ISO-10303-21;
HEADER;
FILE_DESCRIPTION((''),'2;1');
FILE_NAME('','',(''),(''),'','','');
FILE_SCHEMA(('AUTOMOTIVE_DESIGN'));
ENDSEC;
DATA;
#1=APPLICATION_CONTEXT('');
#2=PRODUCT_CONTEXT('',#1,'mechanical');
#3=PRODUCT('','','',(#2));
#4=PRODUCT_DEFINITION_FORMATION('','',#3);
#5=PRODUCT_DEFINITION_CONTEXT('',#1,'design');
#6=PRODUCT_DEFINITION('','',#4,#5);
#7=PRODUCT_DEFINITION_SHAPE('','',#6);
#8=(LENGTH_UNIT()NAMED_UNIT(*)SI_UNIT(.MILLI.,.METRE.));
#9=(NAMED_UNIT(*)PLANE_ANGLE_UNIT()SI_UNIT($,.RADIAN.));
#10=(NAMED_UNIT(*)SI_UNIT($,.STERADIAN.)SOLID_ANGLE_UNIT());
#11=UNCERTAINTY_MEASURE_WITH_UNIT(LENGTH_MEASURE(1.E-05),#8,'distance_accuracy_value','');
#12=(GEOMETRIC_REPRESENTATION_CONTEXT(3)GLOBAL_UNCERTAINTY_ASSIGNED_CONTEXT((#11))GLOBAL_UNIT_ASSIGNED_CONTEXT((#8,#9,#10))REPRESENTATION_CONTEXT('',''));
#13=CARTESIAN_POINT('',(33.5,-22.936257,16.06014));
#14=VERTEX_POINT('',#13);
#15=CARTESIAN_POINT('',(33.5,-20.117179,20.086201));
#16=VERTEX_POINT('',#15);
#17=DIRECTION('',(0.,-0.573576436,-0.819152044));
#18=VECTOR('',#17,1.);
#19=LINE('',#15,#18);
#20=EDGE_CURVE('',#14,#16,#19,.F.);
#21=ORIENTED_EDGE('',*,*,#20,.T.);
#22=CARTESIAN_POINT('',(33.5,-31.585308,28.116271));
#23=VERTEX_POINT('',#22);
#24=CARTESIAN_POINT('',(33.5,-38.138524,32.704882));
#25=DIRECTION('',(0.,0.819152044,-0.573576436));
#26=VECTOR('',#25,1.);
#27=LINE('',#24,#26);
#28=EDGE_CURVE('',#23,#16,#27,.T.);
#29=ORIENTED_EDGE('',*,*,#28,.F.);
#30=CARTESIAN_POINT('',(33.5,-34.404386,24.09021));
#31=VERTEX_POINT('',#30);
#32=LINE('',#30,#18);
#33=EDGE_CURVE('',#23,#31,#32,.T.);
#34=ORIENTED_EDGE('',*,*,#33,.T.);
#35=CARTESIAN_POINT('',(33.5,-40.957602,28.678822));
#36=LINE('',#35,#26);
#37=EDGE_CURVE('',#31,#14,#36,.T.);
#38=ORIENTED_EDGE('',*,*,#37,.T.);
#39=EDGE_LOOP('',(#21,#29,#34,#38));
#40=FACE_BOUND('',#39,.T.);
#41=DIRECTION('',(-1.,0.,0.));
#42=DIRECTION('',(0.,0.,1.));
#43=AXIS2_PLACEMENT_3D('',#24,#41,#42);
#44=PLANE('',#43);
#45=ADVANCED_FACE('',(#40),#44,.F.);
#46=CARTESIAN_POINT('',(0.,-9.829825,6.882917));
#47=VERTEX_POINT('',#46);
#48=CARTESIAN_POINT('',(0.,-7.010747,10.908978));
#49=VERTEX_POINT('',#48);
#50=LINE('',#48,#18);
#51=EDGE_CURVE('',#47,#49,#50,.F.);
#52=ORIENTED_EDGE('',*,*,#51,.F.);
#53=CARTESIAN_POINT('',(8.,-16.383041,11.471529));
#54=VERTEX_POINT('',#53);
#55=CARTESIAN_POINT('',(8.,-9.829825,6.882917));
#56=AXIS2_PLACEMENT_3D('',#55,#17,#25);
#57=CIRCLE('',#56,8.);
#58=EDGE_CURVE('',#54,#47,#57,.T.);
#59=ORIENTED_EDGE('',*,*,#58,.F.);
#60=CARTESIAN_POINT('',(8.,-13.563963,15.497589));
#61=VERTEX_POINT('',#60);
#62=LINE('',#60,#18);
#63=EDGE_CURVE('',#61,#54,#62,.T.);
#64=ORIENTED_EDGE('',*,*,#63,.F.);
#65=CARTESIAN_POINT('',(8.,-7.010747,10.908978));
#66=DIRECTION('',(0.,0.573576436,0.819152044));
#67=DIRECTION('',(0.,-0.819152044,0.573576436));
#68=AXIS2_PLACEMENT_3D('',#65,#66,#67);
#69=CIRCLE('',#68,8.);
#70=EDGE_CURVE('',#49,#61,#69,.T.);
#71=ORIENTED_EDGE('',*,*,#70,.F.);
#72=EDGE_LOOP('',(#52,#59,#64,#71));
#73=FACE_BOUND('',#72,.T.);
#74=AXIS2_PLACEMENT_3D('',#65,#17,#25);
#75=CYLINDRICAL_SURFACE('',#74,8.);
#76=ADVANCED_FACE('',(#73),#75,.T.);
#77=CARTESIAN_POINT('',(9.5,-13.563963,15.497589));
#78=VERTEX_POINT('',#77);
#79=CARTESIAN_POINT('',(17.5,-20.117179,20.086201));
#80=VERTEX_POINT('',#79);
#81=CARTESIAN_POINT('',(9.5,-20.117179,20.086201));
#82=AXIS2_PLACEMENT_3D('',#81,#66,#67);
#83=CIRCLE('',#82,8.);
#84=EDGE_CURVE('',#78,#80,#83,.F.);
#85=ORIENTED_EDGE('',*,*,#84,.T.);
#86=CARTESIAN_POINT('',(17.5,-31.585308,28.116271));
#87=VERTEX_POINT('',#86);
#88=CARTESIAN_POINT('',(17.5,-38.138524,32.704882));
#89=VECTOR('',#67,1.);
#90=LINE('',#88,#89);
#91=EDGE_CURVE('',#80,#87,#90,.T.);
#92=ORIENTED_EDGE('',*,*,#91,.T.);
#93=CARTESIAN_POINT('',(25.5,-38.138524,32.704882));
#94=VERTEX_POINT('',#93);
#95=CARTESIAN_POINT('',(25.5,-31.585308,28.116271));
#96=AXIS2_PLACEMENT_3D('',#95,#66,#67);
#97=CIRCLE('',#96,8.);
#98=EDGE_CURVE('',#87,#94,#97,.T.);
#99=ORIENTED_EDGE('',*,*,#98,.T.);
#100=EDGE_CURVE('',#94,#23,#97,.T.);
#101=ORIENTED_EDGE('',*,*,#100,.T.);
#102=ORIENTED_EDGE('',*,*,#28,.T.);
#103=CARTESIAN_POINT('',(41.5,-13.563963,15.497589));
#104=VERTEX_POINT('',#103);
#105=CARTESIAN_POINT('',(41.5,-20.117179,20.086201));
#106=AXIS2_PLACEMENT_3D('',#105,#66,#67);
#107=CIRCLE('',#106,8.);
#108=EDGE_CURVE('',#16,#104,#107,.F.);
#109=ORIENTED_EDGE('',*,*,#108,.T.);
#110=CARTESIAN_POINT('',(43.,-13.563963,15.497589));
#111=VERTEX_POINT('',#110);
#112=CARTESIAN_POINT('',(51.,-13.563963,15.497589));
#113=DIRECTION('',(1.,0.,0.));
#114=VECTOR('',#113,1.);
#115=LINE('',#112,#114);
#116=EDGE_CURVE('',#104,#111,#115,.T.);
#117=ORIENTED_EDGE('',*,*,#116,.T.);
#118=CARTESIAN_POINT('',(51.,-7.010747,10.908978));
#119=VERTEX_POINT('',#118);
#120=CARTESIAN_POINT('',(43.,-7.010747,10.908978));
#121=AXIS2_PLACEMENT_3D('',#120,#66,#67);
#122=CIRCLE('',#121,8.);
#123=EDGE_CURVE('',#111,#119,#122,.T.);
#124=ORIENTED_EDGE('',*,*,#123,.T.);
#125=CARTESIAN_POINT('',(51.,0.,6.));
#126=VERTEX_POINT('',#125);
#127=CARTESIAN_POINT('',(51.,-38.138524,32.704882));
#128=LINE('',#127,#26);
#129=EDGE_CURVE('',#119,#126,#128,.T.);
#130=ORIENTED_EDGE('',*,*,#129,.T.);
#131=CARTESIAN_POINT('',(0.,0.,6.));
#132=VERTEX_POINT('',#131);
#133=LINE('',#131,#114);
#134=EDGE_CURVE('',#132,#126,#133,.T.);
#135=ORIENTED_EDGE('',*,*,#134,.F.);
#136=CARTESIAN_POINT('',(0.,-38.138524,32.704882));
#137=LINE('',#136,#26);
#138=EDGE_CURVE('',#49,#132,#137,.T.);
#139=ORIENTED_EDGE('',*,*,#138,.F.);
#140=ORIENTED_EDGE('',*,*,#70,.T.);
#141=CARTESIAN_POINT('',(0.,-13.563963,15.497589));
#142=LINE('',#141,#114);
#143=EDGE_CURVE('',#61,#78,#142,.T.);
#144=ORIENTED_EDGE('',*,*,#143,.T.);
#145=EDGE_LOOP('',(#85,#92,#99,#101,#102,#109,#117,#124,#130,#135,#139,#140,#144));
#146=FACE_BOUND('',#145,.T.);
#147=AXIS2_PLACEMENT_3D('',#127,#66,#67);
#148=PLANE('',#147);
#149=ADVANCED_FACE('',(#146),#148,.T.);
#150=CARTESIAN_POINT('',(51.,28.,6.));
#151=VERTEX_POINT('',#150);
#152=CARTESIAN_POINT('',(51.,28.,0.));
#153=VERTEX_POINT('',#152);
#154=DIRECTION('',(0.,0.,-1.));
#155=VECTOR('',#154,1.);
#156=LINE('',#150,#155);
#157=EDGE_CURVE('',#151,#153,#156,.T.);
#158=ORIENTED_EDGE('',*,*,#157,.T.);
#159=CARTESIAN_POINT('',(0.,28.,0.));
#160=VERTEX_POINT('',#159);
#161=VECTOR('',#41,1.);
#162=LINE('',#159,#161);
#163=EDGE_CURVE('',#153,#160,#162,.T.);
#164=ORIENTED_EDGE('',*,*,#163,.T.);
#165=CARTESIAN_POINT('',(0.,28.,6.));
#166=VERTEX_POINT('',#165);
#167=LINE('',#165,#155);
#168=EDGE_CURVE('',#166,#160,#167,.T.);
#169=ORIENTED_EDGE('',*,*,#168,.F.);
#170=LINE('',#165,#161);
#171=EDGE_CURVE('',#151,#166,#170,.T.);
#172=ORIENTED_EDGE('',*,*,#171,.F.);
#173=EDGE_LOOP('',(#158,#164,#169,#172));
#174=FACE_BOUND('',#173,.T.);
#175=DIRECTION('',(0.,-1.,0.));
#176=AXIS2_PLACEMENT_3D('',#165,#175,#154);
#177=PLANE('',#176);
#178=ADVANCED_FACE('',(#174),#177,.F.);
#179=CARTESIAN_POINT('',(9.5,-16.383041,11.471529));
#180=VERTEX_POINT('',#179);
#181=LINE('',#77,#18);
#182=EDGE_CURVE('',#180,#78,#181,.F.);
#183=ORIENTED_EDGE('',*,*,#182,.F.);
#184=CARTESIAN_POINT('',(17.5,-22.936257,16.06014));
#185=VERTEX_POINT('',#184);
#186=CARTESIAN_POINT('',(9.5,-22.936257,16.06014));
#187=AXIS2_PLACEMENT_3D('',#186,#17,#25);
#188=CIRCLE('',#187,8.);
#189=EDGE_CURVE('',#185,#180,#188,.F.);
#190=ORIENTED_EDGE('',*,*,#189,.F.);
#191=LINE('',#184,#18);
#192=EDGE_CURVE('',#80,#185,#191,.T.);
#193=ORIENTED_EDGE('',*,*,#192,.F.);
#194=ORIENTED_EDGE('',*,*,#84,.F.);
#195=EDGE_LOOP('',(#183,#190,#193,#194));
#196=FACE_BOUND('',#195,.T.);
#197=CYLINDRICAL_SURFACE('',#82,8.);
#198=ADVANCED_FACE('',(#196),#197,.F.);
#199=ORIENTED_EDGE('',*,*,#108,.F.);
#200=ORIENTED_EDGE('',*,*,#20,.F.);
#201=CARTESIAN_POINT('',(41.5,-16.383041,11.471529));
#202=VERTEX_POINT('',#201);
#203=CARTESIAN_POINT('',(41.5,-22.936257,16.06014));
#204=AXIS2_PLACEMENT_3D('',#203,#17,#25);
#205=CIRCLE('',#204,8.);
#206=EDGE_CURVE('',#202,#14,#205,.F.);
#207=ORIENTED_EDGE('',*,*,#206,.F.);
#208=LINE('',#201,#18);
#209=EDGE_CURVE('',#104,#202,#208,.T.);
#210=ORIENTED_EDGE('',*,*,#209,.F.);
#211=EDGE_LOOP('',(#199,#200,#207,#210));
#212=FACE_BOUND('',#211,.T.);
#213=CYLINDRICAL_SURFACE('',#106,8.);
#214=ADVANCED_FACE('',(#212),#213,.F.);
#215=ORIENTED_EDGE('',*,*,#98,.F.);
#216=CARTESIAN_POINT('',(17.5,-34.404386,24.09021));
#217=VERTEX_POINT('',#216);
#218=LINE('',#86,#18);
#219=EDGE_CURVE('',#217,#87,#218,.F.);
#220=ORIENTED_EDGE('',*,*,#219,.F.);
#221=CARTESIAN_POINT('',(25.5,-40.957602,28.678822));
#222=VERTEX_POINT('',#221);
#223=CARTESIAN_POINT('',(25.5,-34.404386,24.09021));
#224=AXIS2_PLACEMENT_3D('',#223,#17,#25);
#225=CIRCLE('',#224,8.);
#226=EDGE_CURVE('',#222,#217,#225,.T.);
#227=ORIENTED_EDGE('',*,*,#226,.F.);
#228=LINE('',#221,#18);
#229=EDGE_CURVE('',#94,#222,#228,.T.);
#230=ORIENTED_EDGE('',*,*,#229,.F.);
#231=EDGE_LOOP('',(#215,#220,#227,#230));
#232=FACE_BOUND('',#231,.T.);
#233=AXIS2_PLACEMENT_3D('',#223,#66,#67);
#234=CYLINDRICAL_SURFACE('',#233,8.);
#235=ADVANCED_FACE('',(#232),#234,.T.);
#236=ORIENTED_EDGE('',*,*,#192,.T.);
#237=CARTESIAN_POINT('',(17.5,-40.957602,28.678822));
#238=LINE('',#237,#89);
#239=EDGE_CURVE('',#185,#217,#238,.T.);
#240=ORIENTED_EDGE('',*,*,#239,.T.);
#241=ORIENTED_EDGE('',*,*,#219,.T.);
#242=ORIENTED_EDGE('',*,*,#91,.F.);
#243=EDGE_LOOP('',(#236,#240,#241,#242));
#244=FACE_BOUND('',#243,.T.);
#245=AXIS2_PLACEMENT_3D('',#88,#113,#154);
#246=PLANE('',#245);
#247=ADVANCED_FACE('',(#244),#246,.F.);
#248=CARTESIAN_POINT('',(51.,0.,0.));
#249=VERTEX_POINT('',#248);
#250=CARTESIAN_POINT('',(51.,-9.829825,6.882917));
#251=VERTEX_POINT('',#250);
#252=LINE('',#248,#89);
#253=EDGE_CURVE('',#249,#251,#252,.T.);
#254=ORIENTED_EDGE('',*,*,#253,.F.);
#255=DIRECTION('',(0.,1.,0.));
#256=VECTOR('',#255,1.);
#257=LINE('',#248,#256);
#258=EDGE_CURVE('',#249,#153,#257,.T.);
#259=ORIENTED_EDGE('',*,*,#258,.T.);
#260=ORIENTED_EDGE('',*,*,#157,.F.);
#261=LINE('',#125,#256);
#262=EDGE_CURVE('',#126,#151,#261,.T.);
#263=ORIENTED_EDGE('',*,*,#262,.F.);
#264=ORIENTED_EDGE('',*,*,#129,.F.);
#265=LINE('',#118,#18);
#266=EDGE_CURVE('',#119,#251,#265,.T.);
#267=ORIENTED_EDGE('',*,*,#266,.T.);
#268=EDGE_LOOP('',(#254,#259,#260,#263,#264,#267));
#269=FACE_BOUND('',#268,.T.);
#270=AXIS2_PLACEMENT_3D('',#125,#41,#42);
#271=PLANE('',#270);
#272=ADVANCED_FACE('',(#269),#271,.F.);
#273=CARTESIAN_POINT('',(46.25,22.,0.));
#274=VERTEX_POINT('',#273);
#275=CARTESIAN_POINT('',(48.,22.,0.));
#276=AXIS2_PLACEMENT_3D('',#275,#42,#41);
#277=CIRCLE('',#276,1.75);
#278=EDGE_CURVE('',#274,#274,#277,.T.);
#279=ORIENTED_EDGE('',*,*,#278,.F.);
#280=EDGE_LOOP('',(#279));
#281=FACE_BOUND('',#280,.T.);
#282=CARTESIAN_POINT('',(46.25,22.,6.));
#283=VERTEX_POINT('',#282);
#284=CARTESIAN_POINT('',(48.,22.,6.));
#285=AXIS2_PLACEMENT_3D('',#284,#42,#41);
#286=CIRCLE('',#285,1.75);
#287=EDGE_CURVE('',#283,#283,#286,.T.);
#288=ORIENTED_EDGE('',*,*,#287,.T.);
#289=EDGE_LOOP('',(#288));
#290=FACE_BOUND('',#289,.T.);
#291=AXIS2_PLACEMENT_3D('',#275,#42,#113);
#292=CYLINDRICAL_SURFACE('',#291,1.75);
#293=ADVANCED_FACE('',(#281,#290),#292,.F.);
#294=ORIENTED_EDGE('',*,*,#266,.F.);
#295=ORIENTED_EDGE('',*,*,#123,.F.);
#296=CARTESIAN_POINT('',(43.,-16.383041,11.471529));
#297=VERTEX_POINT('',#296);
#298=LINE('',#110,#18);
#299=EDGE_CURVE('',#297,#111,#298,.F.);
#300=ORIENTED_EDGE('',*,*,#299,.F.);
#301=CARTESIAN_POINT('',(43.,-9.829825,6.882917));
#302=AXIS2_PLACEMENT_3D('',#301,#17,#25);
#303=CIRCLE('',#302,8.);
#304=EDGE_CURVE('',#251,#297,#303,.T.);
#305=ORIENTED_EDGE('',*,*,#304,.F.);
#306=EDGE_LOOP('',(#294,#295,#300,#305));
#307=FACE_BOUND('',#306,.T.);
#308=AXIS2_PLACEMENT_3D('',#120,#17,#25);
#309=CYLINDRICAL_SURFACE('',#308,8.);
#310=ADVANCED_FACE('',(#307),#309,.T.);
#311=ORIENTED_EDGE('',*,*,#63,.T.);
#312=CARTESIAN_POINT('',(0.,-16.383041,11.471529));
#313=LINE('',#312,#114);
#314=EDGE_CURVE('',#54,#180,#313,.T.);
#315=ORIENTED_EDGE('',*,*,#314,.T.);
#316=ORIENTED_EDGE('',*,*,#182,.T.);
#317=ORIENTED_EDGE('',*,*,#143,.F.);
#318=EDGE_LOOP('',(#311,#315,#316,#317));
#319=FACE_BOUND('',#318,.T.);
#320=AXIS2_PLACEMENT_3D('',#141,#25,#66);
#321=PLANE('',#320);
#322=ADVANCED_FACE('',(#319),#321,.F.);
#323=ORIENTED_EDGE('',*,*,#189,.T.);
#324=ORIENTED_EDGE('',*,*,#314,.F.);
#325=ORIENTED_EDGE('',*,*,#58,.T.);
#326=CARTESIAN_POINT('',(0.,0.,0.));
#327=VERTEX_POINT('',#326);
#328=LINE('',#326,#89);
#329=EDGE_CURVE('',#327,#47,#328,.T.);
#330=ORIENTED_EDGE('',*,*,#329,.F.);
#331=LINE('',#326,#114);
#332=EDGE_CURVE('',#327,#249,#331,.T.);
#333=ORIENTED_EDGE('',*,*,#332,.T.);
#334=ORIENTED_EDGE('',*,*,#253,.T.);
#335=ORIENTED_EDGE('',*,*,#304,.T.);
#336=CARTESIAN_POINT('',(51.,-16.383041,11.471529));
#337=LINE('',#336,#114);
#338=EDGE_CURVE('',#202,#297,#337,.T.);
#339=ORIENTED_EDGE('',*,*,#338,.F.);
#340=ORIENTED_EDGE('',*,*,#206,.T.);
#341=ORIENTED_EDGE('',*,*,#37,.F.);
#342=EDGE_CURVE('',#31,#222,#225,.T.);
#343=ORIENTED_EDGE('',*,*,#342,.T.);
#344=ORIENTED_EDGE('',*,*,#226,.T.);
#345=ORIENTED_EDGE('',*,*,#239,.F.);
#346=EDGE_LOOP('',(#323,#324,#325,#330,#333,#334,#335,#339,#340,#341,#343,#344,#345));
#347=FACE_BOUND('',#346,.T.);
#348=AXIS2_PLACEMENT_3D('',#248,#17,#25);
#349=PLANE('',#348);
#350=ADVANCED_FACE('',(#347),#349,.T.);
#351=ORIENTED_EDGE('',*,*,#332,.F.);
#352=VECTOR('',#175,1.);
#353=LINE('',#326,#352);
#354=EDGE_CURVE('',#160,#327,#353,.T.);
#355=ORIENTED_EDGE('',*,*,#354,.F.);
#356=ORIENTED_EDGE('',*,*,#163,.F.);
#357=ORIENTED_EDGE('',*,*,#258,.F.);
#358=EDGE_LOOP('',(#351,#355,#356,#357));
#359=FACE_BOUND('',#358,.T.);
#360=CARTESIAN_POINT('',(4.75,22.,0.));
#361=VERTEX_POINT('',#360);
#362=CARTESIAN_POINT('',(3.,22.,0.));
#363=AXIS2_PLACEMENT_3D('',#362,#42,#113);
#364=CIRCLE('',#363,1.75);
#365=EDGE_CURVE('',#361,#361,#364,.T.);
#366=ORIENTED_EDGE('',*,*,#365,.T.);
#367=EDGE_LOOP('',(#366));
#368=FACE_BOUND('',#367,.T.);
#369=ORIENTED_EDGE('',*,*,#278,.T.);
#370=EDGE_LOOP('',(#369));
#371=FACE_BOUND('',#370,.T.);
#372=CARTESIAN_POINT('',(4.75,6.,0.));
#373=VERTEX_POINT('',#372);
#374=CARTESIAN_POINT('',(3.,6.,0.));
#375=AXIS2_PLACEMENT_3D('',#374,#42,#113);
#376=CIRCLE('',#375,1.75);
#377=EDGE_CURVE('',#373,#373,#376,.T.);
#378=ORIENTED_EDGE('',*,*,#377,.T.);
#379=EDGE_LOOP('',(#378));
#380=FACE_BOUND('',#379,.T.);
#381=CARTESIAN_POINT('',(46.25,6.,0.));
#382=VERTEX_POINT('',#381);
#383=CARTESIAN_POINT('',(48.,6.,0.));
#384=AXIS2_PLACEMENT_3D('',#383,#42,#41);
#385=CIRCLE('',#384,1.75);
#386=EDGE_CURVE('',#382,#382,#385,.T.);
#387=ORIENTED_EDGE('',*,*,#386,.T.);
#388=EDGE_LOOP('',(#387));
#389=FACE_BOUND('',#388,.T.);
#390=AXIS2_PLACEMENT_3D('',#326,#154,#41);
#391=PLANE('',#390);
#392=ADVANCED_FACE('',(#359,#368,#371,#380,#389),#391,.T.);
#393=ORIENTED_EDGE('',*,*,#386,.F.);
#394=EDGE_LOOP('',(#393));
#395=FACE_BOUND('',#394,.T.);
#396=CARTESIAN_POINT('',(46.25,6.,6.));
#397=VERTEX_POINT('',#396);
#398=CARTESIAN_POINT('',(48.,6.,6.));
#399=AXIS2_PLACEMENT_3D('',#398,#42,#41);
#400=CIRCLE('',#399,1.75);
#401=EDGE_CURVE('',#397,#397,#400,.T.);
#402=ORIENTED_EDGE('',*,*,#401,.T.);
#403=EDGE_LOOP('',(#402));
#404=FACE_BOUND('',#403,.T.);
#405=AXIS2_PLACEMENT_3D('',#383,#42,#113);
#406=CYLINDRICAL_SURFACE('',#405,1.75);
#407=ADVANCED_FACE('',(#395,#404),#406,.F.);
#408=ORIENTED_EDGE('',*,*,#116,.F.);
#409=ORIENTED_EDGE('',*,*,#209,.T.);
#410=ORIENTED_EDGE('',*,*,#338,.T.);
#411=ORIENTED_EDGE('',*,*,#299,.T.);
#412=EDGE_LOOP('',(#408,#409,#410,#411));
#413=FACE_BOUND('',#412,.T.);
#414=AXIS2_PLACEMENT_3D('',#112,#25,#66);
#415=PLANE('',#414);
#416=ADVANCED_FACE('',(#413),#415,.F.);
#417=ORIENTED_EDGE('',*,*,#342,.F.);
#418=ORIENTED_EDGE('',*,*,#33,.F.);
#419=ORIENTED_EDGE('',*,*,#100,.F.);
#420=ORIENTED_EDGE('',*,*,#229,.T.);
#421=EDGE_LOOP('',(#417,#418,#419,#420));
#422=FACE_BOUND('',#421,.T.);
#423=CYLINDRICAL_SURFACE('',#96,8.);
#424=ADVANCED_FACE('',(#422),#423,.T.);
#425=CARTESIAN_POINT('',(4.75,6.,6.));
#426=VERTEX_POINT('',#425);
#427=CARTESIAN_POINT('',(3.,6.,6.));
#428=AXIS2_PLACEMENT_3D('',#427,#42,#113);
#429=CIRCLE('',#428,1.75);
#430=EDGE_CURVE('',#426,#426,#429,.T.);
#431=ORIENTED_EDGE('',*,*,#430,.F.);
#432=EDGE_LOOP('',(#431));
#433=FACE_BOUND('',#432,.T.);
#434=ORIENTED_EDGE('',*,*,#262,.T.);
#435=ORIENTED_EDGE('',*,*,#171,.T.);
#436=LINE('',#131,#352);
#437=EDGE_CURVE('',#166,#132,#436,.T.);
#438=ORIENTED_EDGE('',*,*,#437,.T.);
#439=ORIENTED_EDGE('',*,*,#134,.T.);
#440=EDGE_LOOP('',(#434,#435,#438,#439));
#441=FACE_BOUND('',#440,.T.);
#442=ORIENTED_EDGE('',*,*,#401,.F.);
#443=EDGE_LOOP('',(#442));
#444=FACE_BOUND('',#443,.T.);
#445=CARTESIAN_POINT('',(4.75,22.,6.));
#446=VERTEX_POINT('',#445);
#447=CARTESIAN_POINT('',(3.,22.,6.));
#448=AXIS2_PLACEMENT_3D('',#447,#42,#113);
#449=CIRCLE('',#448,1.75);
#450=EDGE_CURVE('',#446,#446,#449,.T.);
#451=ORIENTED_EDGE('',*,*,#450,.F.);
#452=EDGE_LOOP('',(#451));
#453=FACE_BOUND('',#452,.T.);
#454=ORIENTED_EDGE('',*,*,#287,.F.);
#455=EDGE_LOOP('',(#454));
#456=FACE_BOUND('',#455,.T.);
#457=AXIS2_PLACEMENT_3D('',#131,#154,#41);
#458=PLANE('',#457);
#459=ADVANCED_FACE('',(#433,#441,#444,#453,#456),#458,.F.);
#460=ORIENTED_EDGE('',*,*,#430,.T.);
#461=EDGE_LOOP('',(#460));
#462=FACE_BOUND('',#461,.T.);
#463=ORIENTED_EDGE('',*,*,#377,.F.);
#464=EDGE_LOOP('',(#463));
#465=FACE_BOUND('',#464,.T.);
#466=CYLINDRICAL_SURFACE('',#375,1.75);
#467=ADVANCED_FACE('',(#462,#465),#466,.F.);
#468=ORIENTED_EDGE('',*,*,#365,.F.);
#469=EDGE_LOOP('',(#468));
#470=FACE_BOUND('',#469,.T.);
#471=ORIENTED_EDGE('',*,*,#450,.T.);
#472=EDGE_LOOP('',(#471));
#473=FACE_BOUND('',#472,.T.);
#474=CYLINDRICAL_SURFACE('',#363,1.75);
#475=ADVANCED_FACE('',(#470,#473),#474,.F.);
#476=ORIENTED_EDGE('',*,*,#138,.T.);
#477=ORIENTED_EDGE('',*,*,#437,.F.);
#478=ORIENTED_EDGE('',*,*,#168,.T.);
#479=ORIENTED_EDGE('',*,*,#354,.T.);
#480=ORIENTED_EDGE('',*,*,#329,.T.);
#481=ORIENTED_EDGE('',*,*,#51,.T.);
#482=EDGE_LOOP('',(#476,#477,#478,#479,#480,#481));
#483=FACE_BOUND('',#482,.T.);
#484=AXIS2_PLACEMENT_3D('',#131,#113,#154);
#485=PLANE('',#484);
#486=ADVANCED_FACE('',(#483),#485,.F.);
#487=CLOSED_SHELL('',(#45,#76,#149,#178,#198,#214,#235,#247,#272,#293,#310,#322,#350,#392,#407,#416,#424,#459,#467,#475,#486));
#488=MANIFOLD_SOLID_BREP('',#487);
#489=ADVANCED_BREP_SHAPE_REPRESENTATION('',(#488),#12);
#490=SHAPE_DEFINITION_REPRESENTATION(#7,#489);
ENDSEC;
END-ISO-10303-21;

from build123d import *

# Parameters (mm, degrees)
ESQUISSE1_W             = 51
ESQUISSE1_H             = 28
BOSS_EXTRU_1_DEPTH      = 6
ESQUISSE2_R             = 1.75
ENL_V_MAT_EXTRU_1_DEPTH = 59.489315264
BOSS_EXTRU_2_DEPTH      = 51
ESQUISSE4_W             = 17.5
ESQUISSE4_H             = 30
ENL_V_MAT_EXTRU_2_DEPTH = 4.914913
CONG_1_R                = 8


with BuildPart() as part:
    # Esquisse1 → Boss.-Extru.1 (new body)
    with BuildSketch(Plane.XY):
        with Locations((25.5, 14)):
            Rectangle(ESQUISSE1_W, ESQUISSE1_H)
    extrude(amount=BOSS_EXTRU_1_DEPTH)

    # Esquisse2 → Enlèv. mat.-Extru.1 (cut, through all)
    with BuildSketch(Plane.XY.offset(6)):
        with Locations((3, 6)):
            Circle(ESQUISSE2_R)
        with Locations((3, 22)):
            Circle(ESQUISSE2_R)
        with Locations(Location((48, 22, 0), (0, 0, 180))):
            Circle(ESQUISSE2_R)
        with Locations(Location((48, 6, 0), (0, 0, 180))):
            Circle(ESQUISSE2_R)
    extrude(amount=-ENL_V_MAT_EXTRU_1_DEPTH, mode=Mode.SUBTRACT)

    # Esquisse3 → Boss.-Extru.2 (add)
    with BuildSketch(Plane.ZY):
        Polygon((0, 0), (28.678821818, -40.957602214), (32.704882248, -38.138524352), (6, 0), align=None)
    extrude(amount=-BOSS_EXTRU_2_DEPTH)

    # Esquisse4 → Enlèv. mat.-Extru.2 (cut)
    with BuildSketch(Plane(origin=(0, 0, 0), x_dir=(-1, 0, 0), z_dir=(0, -0.5735764363510419, -0.8191520442889949))):
        with Locations((-8.75, -35)):
            Rectangle(ESQUISSE4_W, ESQUISSE4_H)
        with Locations((-42.25, -35)):
            Rectangle(ESQUISSE4_W, ESQUISSE4_H)
    extrude(amount=-ENL_V_MAT_EXTRU_2_DEPTH, mode=Mode.SUBTRACT)

    # Congé1
    cong_1_edges = [part.edges().sort_by_distance(p)[0] for p in [
        (33.5, -14.973501955, 13.484558942),
        (17.5, -14.973501955, 13.484558942),
        (33.5, -39.548063283, 30.691852033),
        (17.5, -39.548063283, 30.691852033),
        (0, -14.973501955, 13.484558942),
        (51, -14.973501955, 13.484558942),
    ]]
    fillet(cong_1_edges, radius=CONG_1_R - 0.0001)  # a hair under: the kernel refuses the full size


solid = part.part
